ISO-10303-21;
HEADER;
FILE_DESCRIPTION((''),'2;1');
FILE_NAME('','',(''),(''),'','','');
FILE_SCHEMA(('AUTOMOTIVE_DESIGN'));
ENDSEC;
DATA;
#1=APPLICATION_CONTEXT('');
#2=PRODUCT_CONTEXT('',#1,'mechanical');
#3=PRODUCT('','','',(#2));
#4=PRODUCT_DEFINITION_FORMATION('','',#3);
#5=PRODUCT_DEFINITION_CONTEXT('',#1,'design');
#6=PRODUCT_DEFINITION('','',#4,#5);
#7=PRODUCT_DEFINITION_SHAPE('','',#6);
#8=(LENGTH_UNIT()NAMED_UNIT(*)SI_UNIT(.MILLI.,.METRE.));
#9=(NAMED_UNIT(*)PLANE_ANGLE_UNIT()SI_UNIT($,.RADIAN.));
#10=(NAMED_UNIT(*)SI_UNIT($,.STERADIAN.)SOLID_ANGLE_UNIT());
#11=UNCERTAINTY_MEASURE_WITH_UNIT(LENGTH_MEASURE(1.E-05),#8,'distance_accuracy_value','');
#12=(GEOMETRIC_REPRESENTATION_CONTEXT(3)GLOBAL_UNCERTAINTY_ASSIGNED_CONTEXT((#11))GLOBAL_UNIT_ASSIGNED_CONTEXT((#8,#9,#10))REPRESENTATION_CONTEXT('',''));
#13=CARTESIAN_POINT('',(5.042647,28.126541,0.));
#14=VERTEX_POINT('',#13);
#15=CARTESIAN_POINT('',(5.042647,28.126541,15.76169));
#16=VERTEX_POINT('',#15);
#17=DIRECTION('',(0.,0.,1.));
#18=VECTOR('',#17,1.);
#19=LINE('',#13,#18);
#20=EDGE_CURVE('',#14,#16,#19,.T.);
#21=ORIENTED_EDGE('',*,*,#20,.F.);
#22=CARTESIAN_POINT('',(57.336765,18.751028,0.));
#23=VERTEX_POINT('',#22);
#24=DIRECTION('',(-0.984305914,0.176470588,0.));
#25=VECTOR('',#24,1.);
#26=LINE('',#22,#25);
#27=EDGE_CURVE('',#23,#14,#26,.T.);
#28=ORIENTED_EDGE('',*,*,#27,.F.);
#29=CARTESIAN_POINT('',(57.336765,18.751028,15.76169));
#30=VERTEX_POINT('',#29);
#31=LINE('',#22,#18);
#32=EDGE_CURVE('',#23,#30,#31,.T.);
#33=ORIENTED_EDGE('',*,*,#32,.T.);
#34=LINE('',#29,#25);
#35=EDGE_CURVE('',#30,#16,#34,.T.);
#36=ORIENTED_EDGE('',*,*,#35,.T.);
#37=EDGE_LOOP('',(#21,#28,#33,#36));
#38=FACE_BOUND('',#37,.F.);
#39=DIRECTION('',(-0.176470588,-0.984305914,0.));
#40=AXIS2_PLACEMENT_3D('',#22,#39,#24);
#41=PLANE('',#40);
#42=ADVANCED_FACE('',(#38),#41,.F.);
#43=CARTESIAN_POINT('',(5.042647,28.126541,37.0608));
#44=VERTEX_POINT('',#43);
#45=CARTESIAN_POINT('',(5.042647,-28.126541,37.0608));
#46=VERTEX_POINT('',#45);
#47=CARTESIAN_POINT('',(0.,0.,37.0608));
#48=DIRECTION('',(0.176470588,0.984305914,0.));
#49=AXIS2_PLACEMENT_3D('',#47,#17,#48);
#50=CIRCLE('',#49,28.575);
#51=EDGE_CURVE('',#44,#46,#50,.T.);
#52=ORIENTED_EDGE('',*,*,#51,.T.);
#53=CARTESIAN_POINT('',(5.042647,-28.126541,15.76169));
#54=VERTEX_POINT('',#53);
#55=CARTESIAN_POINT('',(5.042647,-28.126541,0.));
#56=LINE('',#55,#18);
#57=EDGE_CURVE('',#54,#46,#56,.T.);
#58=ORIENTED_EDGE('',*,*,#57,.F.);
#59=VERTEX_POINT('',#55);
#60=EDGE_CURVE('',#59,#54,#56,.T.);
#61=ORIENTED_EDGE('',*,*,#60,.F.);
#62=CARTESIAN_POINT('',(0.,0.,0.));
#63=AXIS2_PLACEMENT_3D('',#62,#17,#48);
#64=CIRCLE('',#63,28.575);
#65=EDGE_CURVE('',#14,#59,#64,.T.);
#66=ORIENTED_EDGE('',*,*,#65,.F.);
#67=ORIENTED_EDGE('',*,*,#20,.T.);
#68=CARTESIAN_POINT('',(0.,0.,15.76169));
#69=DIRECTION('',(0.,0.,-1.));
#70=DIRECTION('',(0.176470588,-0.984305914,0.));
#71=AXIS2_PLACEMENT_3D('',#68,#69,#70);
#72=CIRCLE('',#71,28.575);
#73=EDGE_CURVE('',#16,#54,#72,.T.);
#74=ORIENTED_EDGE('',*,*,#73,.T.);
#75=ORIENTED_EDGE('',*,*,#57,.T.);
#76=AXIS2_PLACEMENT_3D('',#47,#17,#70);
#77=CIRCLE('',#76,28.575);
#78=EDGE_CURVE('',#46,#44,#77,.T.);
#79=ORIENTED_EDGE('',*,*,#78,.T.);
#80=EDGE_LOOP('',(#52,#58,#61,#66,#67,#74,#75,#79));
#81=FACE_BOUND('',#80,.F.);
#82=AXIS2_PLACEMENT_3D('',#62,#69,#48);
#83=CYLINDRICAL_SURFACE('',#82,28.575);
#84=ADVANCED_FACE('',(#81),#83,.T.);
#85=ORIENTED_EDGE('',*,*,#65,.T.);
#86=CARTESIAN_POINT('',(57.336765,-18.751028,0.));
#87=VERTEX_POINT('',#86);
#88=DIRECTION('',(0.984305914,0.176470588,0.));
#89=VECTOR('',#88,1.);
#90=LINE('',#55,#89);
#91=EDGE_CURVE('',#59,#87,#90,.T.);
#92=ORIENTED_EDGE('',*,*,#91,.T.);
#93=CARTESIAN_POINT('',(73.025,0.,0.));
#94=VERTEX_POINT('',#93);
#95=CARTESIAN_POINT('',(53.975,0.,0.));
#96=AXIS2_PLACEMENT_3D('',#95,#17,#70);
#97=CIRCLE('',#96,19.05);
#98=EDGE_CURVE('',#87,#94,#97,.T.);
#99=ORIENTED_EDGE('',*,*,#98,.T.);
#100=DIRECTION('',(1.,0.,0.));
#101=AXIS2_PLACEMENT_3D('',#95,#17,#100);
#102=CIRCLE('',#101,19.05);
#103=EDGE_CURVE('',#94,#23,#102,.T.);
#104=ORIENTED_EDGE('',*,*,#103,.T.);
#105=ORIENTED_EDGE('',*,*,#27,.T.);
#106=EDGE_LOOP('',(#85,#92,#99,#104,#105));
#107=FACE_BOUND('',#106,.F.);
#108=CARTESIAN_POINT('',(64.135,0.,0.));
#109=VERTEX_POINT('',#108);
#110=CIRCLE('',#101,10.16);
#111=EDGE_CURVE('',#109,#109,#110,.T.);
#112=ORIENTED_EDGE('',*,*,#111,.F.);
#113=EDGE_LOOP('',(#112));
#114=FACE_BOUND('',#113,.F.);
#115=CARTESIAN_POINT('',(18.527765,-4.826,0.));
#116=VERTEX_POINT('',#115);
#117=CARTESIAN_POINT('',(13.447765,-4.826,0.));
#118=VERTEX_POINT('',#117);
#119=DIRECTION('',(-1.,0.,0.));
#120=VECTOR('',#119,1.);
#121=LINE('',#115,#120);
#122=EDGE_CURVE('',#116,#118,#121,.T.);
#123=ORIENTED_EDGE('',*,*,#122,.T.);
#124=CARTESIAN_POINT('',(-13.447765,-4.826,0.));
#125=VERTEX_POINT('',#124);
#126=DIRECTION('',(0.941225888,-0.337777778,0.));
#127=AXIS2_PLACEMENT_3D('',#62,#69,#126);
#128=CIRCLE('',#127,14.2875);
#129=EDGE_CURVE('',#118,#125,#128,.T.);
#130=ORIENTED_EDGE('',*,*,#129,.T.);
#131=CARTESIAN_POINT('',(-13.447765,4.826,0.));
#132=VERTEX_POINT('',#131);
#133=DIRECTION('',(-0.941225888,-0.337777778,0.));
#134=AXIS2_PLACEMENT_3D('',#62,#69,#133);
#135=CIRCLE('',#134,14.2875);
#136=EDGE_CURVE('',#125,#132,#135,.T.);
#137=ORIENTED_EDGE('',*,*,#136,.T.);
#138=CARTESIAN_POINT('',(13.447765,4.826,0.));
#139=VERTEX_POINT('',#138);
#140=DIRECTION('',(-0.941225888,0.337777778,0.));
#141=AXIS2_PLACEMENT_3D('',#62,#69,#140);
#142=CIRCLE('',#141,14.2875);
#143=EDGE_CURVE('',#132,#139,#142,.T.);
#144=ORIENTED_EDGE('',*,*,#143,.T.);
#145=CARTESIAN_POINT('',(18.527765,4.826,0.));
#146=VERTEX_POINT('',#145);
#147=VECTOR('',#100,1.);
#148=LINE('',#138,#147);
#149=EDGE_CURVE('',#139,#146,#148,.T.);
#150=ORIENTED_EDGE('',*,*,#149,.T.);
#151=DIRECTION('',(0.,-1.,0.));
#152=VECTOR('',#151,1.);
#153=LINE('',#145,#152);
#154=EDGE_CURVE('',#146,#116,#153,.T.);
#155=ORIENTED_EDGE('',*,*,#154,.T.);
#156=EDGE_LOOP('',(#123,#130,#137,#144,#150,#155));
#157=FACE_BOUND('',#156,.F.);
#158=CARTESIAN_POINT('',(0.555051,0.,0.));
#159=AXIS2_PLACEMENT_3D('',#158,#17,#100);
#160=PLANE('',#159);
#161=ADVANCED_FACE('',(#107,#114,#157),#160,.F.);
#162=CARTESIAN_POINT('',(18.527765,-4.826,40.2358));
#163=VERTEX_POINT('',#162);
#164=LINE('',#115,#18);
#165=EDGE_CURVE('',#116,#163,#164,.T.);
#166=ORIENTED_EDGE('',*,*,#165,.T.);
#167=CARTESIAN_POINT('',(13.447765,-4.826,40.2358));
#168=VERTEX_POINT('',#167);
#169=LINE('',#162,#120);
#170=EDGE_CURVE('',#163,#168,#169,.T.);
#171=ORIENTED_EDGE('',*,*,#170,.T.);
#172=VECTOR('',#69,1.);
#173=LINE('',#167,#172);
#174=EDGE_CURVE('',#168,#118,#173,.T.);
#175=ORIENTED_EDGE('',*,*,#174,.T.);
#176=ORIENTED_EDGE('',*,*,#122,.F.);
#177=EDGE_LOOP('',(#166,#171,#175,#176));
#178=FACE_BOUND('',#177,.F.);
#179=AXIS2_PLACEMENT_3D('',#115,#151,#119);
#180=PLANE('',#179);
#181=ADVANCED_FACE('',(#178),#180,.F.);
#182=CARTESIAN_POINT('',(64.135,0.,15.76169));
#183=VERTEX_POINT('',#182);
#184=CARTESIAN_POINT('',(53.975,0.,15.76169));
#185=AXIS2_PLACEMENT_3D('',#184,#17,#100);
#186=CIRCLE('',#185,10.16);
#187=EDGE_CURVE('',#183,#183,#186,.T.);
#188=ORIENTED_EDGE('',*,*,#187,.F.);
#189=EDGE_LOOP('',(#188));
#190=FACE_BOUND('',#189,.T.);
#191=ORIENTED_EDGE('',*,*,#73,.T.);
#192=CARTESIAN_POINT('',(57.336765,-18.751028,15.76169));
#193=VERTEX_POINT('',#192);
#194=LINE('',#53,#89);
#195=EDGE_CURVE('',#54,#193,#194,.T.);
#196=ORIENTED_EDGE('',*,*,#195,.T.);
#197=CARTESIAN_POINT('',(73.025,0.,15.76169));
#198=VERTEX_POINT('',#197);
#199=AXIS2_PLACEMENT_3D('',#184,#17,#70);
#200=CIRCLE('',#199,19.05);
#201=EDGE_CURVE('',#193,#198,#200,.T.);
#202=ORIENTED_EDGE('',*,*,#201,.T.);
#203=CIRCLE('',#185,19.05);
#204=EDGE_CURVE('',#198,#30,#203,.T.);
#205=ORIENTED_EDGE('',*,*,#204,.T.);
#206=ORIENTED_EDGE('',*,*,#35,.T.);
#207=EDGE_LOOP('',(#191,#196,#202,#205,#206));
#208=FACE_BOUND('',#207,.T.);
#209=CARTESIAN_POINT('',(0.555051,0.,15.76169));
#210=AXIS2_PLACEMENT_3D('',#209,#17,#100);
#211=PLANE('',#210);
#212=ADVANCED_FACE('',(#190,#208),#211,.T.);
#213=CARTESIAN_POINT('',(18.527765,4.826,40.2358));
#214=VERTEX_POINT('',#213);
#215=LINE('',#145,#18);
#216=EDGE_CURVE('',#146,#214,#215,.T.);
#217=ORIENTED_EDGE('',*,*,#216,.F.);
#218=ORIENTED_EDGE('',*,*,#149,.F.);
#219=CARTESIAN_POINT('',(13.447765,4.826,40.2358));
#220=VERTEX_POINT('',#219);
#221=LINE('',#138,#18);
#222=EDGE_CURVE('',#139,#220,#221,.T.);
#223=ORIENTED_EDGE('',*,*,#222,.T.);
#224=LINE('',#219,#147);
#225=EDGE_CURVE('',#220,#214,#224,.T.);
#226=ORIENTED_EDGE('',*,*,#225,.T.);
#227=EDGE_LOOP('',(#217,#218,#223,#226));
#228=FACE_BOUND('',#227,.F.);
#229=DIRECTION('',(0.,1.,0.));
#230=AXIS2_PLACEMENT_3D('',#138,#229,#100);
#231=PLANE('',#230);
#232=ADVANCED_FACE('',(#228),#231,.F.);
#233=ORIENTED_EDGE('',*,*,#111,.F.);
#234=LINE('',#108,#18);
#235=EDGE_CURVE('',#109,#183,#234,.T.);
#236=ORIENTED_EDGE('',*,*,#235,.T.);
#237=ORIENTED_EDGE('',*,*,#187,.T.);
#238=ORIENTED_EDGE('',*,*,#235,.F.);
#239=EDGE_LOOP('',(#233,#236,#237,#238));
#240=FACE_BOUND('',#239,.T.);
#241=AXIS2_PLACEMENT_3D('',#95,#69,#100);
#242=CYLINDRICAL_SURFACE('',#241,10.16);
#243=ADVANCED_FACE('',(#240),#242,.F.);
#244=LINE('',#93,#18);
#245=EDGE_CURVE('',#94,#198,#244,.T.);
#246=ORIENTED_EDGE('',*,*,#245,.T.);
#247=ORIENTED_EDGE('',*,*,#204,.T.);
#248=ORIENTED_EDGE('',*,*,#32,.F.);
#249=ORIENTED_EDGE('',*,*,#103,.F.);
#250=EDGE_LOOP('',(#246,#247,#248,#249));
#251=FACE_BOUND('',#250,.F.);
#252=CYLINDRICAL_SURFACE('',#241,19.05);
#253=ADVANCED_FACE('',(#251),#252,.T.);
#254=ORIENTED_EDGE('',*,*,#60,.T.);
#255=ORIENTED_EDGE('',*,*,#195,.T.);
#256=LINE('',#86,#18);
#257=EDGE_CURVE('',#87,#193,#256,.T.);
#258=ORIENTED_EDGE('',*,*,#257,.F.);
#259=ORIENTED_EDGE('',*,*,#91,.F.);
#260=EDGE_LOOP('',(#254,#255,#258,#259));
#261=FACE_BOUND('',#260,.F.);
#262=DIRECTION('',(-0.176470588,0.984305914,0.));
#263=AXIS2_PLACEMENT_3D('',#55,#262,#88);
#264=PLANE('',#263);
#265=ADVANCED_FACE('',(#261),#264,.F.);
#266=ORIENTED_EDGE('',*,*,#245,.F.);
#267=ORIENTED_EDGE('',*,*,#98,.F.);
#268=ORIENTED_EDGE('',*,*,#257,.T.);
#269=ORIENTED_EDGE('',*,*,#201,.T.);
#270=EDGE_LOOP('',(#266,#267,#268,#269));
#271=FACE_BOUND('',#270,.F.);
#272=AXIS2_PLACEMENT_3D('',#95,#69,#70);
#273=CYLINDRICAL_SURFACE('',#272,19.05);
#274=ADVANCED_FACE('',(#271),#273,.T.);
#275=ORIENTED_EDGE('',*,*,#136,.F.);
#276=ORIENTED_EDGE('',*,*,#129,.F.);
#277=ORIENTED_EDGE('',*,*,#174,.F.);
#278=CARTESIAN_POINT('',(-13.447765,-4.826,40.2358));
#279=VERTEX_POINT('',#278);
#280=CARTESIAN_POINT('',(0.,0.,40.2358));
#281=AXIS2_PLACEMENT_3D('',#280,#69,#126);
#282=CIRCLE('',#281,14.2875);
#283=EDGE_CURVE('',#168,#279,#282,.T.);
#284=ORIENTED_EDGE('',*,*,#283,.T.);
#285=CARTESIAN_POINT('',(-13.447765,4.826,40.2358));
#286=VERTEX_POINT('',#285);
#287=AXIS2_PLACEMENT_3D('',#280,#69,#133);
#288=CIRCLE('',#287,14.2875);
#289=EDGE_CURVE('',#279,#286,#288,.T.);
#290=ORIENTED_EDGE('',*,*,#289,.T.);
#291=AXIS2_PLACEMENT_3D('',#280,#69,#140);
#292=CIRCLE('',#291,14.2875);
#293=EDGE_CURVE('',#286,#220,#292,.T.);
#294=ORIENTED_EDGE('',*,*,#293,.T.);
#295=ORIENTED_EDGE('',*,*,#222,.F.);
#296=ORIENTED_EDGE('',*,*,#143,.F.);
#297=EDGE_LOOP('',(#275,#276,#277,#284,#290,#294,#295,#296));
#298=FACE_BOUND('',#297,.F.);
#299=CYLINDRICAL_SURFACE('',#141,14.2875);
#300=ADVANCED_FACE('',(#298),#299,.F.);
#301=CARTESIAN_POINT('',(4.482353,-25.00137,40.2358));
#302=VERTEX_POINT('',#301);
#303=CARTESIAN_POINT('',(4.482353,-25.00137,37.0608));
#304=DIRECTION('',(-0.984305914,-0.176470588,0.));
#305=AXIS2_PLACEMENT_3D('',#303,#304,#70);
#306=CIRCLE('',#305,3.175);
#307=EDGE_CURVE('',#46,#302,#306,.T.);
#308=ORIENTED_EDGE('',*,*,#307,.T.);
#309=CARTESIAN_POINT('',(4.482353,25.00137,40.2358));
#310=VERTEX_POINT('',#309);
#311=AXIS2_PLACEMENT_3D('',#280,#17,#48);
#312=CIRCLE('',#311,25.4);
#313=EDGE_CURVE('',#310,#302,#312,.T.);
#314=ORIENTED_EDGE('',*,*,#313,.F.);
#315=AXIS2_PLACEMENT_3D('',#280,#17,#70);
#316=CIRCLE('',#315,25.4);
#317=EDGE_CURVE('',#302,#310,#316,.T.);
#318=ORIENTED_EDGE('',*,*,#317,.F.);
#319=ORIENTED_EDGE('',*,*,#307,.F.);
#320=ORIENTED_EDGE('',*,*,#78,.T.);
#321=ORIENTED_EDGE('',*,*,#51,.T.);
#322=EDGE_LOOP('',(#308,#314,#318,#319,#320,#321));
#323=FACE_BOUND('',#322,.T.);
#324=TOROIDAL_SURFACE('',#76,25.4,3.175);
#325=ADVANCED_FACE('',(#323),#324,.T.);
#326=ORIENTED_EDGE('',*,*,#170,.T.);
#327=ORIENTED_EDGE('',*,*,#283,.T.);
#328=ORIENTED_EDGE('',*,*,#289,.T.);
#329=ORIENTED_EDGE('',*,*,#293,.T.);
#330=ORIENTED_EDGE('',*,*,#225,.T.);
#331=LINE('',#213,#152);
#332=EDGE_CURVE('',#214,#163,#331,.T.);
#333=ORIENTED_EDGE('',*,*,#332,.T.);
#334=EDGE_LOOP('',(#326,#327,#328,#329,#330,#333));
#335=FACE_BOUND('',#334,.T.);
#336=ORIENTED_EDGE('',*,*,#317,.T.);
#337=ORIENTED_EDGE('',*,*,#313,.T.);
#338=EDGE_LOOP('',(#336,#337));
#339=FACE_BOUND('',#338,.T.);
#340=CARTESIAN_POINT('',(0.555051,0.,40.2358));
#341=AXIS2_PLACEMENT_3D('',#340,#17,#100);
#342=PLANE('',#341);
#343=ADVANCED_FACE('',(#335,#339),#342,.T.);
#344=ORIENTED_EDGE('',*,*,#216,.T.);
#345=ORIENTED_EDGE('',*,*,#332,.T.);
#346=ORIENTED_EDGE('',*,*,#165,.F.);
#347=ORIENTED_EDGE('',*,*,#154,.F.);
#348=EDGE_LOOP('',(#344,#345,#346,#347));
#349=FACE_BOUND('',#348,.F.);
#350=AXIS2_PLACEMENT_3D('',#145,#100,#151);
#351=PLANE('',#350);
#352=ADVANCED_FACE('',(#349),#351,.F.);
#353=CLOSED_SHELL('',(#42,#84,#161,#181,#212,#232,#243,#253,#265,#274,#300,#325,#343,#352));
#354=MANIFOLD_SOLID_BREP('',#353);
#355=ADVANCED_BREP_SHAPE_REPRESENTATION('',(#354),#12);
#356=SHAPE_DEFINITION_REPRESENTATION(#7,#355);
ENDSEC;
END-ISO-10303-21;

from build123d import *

# Parameters (mm, degrees)
F0_R     = 10.16
F1_DEPTH = 15.76169
F2_DEPTH = 40.2358
F3_R     = 3.175


# Not quite as in the source:
# - a feature names something its author has since deleted; it is built from what else it names


with BuildPart() as f1:
    # F0 (on Top) → F1 (new body)
    with BuildSketch(Plane.XY):
        with BuildLine():
            ThreePointArc((5.0426470588, -28.1265414802), (21.9160245563, -18.3362616868), (28.575, 0))
            ThreePointArc((28.575, 0), (21.9160245563, 18.3362616868), (5.0426470588, 28.1265414802))
            ThreePointArc((5.0426470588, 28.1265414802), (-28.575, 0), (5.0426470588, -28.1265414802))
        make_face()
        with BuildLine():
            ThreePointArc((-13.4477648793, 4.826), (0, 14.2875), (13.4477648793, 4.826))
            Line((13.4477648793, 4.826), (18.5277648793, 4.826))
            Line((18.5277648793, 4.826), (18.5277648793, -4.826))
            Line((18.5277648793, -4.826), (13.4477648793, -4.826))
            ThreePointArc((13.4477648793, -4.826), (0, -14.2875), (-13.4477648793, -4.826))
            Line((-13.4477648793, -4.826), (-18.5277648793, -4.826))
            Line((-18.5277648793, -4.826), (-18.5277648793, 4.826))
            Line((-18.5277648793, 4.826), (-13.4477648793, 4.826))
        make_face(mode=Mode.SUBTRACT)
        with BuildLine():
            ThreePointArc((5.0426470588, 28.1265414802), (21.9160245563, 18.3362616868), (28.575, 0))
            ThreePointArc((28.575, 0), (21.9160245563, -18.3362616868), (5.0426470588, -28.1265414802))
            Line((5.0426470588, -28.1265414802), (57.3367647059, -18.7510276535))
            ThreePointArc((57.3367647059, -18.7510276535), (34.925, 0), (57.3367647059, 18.7510276535))
            Line((57.3367647059, 18.7510276535), (5.0426470588, 28.1265414802))
        make_face()
        with BuildLine():
            ThreePointArc((-13.4477648793, -4.826), (-14.2875, 0), (-13.4477648793, 4.826))
            Line((-13.4477648793, 4.826), (-18.5277648793, 4.826))
            Line((-18.5277648793, 4.826), (-18.5277648793, -4.826))
            Line((-18.5277648793, -4.826), (-13.4477648793, -4.826))
        make_face()
        with BuildLine():
            ThreePointArc((73.025, 0), (68.5856830375, 12.2241744579), (57.3367647059, 18.7510276535))
            ThreePointArc((57.3367647059, 18.7510276535), (34.925, 0), (57.3367647059, -18.7510276535))
            ThreePointArc((57.3367647059, -18.7510276535), (68.5856830375, -12.2241744579), (73.025, 0))
        make_face()
        with Locations((53.975, 0)):
            Circle(F0_R, mode=Mode.SUBTRACT)
    extrude(amount=F1_DEPTH)

    # F0 (on Top) → F2 (join)
    with BuildSketch(Plane.XY):
        with BuildLine():
            ThreePointArc((5.0426470588, -28.1265414802), (21.9160245563, -18.3362616868), (28.575, 0))
            ThreePointArc((28.575, 0), (21.9160245563, 18.3362616868), (5.0426470588, 28.1265414802))
            ThreePointArc((5.0426470588, 28.1265414802), (-28.575, 0), (5.0426470588, -28.1265414802))
        make_face()
        with BuildLine():
            ThreePointArc((-13.4477648793, 4.826), (0, 14.2875), (13.4477648793, 4.826))
            Line((13.4477648793, 4.826), (18.5277648793, 4.826))
            Line((18.5277648793, 4.826), (18.5277648793, -4.826))
            Line((18.5277648793, -4.826), (13.4477648793, -4.826))
            ThreePointArc((13.4477648793, -4.826), (0, -14.2875), (-13.4477648793, -4.826))
            Line((-13.4477648793, -4.826), (-18.5277648793, -4.826))
            Line((-18.5277648793, -4.826), (-18.5277648793, 4.826))
            Line((-18.5277648793, 4.826), (-13.4477648793, 4.826))
        make_face(mode=Mode.SUBTRACT)
        with BuildLine():
            ThreePointArc((-13.4477648793, -4.826), (-14.2875, 0), (-13.4477648793, 4.826))
            Line((-13.4477648793, 4.826), (-18.5277648793, 4.826))
            Line((-18.5277648793, 4.826), (-18.5277648793, -4.826))
            Line((-18.5277648793, -4.826), (-13.4477648793, -4.826))
        make_face()
    extrude(amount=F2_DEPTH)

    # F3
    f3_edges = [f1.edges().sort_by_distance(p)[0] for p in [
        (-5.042647, 28.126541, 40.2358),
    ]]
    fillet(f3_edges, radius=F3_R)


solid = f1.part
